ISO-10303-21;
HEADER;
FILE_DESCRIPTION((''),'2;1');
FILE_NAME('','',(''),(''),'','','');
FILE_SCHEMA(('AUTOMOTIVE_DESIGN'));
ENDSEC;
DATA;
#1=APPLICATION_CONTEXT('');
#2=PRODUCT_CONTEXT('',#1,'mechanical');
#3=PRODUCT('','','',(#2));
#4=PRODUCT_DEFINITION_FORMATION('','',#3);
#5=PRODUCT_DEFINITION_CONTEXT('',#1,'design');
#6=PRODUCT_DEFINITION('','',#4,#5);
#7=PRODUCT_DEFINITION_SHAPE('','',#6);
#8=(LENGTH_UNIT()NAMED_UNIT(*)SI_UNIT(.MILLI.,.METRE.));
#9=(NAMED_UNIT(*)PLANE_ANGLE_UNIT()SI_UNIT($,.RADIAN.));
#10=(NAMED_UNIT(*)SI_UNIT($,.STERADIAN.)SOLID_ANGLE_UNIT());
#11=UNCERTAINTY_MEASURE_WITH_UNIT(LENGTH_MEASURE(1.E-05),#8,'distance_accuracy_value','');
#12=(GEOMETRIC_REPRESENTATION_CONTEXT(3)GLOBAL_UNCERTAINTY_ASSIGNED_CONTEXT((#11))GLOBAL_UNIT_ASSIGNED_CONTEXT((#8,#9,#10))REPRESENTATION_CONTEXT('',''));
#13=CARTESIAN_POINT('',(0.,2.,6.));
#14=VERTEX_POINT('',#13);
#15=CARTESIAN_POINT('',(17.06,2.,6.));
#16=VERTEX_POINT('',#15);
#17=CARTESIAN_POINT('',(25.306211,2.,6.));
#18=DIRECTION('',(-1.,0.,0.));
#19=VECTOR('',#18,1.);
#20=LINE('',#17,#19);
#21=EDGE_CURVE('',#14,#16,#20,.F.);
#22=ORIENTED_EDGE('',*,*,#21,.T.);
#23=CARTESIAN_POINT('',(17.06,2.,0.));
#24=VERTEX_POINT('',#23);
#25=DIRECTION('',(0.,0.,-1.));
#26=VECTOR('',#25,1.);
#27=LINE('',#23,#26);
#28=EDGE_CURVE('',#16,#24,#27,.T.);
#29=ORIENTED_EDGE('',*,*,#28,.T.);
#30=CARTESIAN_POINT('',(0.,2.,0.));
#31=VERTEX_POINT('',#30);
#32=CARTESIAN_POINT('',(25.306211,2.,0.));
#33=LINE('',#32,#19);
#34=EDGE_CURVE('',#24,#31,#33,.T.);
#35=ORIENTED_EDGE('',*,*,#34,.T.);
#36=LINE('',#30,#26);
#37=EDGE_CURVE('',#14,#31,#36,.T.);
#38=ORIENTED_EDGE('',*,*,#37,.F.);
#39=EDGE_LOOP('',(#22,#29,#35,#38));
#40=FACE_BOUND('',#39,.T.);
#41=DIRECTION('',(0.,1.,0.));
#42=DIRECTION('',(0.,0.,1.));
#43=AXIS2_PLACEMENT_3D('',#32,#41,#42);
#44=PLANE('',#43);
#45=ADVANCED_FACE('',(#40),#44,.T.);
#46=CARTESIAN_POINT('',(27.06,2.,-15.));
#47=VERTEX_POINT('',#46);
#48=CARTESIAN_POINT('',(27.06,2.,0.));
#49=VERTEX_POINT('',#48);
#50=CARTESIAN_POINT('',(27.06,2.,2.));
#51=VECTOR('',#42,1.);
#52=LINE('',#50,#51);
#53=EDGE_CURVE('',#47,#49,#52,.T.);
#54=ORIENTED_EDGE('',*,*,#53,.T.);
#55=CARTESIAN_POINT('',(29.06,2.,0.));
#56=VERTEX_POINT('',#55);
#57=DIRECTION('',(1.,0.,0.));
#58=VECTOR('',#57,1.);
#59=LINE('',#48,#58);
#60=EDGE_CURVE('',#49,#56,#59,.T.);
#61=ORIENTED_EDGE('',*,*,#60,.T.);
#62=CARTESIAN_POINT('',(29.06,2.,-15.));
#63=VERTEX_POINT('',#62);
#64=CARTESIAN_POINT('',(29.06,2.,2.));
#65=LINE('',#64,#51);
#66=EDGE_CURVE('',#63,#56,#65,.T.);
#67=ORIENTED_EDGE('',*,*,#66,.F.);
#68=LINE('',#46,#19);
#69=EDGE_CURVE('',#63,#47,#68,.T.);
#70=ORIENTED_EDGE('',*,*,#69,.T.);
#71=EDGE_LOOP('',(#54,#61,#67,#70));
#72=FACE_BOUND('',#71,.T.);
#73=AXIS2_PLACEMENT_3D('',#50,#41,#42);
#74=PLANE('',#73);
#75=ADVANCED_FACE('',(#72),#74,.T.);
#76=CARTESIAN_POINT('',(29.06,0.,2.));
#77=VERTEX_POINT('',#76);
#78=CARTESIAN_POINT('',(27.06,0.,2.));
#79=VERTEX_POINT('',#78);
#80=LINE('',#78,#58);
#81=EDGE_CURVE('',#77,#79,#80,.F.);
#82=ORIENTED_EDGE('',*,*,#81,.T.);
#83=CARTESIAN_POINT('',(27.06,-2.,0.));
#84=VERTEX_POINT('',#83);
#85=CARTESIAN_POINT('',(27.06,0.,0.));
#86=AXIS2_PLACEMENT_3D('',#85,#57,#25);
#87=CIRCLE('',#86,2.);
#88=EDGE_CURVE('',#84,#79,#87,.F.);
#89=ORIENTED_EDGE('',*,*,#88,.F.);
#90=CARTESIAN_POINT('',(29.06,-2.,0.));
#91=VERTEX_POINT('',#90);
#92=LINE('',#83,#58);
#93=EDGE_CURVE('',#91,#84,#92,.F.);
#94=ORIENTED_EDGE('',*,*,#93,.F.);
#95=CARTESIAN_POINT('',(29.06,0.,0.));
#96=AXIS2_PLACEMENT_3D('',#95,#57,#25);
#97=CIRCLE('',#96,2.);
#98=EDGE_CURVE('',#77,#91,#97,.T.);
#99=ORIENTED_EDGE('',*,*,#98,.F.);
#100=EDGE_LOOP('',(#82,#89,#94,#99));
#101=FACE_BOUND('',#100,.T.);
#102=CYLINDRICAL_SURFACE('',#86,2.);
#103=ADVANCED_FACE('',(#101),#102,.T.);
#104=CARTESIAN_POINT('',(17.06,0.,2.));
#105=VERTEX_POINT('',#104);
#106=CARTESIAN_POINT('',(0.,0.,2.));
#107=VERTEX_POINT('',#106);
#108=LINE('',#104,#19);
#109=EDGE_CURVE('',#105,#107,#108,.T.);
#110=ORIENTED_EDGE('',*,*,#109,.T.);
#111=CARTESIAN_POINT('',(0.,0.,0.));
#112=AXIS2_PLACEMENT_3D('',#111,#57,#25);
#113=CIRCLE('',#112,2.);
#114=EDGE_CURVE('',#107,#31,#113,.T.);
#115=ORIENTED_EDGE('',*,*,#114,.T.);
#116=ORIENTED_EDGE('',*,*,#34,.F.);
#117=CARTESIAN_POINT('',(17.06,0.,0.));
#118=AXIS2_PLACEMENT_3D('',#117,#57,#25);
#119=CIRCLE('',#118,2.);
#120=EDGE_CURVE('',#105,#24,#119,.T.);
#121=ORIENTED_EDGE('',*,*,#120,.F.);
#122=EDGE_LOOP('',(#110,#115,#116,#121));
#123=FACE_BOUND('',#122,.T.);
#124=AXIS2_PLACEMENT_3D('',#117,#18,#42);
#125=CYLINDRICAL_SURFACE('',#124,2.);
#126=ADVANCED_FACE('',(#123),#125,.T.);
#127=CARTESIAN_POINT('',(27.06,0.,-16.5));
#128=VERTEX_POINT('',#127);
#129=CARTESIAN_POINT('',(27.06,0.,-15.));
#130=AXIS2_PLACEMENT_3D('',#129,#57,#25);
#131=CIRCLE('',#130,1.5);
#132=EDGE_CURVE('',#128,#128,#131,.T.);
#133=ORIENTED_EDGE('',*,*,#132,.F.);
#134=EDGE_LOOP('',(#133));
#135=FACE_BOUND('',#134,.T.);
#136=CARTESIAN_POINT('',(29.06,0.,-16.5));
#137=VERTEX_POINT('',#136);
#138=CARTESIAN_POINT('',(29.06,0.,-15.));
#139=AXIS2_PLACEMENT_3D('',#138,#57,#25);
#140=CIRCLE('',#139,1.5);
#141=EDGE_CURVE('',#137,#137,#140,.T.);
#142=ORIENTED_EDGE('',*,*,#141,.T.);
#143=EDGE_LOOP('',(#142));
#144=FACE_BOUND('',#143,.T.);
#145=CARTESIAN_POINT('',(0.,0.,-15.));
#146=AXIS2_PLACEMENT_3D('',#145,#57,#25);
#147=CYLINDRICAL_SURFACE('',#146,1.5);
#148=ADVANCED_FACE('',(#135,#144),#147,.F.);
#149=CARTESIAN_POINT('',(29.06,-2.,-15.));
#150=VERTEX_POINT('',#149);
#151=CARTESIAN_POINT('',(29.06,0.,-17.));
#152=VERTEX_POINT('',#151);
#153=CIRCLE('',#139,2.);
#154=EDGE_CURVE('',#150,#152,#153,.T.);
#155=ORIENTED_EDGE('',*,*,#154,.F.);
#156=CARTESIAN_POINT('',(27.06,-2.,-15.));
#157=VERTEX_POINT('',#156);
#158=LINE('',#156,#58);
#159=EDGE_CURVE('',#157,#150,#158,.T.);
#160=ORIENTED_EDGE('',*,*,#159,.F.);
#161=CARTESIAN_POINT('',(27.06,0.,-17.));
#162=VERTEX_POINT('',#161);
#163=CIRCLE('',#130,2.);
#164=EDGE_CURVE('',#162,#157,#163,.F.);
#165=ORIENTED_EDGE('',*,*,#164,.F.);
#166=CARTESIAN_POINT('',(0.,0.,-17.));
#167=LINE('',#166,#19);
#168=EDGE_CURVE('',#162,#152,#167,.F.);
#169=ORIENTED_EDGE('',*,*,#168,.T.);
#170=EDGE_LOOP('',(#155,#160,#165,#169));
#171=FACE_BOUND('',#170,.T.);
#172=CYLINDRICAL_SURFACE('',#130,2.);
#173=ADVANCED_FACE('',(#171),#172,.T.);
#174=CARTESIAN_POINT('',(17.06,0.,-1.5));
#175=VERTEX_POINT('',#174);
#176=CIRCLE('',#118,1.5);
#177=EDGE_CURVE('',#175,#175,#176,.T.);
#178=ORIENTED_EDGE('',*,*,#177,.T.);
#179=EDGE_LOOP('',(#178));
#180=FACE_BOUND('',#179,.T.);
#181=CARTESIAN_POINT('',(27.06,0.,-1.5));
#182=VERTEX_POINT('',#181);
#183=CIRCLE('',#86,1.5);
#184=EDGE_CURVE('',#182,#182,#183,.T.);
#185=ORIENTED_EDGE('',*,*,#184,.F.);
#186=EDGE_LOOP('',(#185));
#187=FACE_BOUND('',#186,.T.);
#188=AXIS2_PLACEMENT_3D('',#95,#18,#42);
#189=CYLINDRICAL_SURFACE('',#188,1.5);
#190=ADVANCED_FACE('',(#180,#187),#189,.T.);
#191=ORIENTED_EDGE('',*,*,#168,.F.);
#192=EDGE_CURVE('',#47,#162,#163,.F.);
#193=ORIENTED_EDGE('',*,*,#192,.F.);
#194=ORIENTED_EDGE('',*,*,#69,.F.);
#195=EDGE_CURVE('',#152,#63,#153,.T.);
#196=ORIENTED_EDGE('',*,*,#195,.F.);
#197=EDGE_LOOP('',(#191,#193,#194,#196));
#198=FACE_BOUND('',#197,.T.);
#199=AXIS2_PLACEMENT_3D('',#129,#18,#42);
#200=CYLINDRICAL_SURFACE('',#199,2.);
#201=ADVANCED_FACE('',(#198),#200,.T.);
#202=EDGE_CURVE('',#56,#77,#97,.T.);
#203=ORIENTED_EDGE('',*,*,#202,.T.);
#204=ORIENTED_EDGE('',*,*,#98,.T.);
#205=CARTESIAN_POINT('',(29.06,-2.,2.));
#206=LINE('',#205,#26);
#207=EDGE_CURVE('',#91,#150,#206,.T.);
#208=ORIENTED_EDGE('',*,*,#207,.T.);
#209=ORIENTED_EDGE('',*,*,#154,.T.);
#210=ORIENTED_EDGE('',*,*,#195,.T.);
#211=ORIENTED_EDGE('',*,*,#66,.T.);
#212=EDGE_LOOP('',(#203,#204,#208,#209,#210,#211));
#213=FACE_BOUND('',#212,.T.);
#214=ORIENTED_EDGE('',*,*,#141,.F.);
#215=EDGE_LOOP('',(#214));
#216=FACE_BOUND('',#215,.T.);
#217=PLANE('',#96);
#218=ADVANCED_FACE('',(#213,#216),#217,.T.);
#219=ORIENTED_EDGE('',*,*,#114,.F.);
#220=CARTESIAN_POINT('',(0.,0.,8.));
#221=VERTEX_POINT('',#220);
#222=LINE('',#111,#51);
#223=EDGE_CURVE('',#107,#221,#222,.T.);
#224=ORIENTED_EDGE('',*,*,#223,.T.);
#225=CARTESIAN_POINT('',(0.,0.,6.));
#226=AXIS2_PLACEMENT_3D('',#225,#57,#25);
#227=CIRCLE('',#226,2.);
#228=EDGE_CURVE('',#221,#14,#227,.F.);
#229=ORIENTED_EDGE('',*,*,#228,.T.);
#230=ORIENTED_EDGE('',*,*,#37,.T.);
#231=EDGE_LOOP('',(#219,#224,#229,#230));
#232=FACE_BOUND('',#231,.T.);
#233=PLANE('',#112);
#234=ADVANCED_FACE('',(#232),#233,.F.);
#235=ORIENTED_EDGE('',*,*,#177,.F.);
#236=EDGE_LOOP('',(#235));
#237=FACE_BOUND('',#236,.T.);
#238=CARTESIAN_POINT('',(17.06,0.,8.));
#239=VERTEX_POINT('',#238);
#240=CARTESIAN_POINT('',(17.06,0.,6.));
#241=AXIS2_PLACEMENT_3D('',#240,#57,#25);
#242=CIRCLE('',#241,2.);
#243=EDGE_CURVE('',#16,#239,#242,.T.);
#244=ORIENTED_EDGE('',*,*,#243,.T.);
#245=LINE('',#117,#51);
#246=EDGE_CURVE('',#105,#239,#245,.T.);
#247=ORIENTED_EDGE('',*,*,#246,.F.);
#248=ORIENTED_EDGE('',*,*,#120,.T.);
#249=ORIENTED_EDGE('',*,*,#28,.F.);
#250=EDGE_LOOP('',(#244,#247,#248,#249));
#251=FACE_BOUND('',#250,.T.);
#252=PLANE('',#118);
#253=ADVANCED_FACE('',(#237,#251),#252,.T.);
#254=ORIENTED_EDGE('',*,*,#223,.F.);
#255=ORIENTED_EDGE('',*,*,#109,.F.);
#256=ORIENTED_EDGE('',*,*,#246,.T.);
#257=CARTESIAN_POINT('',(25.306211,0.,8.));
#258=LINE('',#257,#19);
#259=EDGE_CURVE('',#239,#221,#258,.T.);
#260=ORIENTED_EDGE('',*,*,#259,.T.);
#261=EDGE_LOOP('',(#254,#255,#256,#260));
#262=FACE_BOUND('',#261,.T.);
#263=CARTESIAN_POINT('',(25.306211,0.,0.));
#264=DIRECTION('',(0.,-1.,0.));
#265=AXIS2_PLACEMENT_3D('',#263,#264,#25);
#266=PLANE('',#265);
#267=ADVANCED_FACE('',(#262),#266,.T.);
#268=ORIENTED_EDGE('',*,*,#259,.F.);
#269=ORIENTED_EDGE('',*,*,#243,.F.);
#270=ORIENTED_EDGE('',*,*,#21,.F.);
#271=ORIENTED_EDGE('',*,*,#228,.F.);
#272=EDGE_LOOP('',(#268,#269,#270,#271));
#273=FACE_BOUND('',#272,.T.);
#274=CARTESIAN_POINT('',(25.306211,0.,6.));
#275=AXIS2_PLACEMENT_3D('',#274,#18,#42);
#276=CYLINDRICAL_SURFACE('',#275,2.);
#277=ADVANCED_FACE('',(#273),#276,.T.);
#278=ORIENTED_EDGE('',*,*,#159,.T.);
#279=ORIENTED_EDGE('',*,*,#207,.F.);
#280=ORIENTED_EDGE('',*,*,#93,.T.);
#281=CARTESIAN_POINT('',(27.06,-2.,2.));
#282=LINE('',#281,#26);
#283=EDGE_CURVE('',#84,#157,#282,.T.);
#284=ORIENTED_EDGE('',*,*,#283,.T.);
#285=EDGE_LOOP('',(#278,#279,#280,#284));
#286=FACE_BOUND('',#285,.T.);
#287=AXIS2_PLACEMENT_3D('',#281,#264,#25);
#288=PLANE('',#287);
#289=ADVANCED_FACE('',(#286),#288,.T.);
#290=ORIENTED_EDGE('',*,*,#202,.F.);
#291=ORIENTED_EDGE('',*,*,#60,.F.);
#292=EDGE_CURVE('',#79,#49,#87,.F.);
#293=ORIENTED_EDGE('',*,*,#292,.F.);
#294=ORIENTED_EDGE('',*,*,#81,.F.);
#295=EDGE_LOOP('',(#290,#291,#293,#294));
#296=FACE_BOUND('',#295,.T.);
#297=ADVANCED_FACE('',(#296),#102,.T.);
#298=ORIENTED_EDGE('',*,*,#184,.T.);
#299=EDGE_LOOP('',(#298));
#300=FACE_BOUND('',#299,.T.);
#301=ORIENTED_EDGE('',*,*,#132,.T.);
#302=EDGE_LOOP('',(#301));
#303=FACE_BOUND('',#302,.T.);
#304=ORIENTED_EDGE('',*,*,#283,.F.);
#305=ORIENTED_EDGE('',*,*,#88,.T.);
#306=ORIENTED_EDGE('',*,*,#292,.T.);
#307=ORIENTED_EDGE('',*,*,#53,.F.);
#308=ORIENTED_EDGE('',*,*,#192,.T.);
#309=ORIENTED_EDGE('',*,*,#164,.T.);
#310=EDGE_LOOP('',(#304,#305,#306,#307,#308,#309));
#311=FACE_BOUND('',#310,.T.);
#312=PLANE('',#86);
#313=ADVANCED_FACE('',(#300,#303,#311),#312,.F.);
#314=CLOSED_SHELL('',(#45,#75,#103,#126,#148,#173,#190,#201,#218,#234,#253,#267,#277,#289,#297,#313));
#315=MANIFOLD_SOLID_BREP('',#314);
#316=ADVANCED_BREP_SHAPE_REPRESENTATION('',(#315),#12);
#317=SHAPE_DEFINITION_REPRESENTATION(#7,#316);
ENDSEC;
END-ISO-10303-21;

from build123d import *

# Parameters (mm, degrees)
SKETCH2_R           = 2
BOSS_EXTRUDE1_DEPTH = 17.06
SKETCH3_R           = 1.5
BOSS_EXTRUDE2_DEPTH = 12
SKETCH4_W           = 3.988125856
SKETCH4_H           = 4
BOSS_EXTRUDE3_DEPTH = 2
SKETCH5_W           = 2
SKETCH5_H           = 4
BOSS_EXTRUDE4_DEPTH = 19
FILLET1_R           = 2
FILLET2_R           = 2
FILLET3_R           = 2
SKETCH6_R           = 1.5
CUT_EXTRUDE1_DEPTH  = 34.726600777
SKETCH10_W          = 8
SKETCH10_H          = 2
BOSS_EXTRUDE8_DEPTH = 17.06
FILLET6_R           = 2


with BuildPart() as part:
    # Sketch2 → Boss-Extrude1 (new body)
    with BuildSketch(Plane(origin=(0, 0, 0), x_dir=(0, 0, -1), z_dir=(1, 0, 0))):
        Circle(SKETCH2_R)
    extrude(amount=BOSS_EXTRUDE1_DEPTH)

    # Sketch3 → Boss-Extrude2 (add)
    with BuildSketch(Plane(origin=(17.06, 0, 0), x_dir=(0, 0, -1), z_dir=(1, 0, 0))):
        Circle(SKETCH3_R)
    extrude(amount=BOSS_EXTRUDE2_DEPTH)

    # Sketch4 → Boss-Extrude3 (add)
    with BuildSketch(Plane(origin=(29.06, 0, 0), x_dir=(0, 0, -1), z_dir=(1, 0, 0))):
        with Locations((-0.005937072, 0)):
            Rectangle(SKETCH4_W, SKETCH4_H)
    extrude(amount=-BOSS_EXTRUDE3_DEPTH)

    # Sketch5 → Boss-Extrude4 (add)
    with BuildSketch(Plane.XY.offset(2)):
        with Locations((28.06, 0)):
            Rectangle(SKETCH5_W, SKETCH5_H)
    extrude(amount=-BOSS_EXTRUDE4_DEPTH)

    # Fillet1
    fillet1_edges = [part.edges().sort_by_distance(p)[0] for p in [
        (28.06, 2, 2),
    ]]
    fillet(fillet1_edges, radius=FILLET1_R)

    # Fillet2
    fillet2_edges = [part.edges().sort_by_distance(p)[0] for p in [
        (28.06, -2, 2),
    ]]
    fillet(fillet2_edges, radius=FILLET2_R - 0.0001)  # a hair under: the kernel refuses the full size

    # Fillet3
    fillet3_edges = [part.edges().sort_by_distance(p)[0] for p in [
        (28.06, -2, -17),
        (28.06, 2, -17),
    ]]
    fillet(fillet3_edges, radius=FILLET3_R - 0.0001)  # a hair under: the kernel refuses the full size

    # Sketch6 → Cut-Extrude1 (cut, through all)
    with BuildSketch(Plane(origin=(29.06, 0, 0), x_dir=(0, 0, -1), z_dir=(1, 0, 0))):
        with Locations((15, 0)):
            Circle(SKETCH6_R)
    extrude(amount=-CUT_EXTRUDE1_DEPTH, mode=Mode.SUBTRACT)

    # Sketch10 → Boss-Extrude8 (add)
    with BuildSketch(Plane.ZY):
        with Locations((4, 1)):
            Rectangle(SKETCH10_W, SKETCH10_H)
    extrude(amount=-BOSS_EXTRUDE8_DEPTH)

    # Fillet6
    fillet6_edges = [part.edges().sort_by_distance(p)[0] for p in [
        (8.53, 2, 8),
    ]]
    fillet(fillet6_edges, radius=FILLET6_R - 0.0001)  # a hair under: the kernel refuses the full size


solid = part.part
